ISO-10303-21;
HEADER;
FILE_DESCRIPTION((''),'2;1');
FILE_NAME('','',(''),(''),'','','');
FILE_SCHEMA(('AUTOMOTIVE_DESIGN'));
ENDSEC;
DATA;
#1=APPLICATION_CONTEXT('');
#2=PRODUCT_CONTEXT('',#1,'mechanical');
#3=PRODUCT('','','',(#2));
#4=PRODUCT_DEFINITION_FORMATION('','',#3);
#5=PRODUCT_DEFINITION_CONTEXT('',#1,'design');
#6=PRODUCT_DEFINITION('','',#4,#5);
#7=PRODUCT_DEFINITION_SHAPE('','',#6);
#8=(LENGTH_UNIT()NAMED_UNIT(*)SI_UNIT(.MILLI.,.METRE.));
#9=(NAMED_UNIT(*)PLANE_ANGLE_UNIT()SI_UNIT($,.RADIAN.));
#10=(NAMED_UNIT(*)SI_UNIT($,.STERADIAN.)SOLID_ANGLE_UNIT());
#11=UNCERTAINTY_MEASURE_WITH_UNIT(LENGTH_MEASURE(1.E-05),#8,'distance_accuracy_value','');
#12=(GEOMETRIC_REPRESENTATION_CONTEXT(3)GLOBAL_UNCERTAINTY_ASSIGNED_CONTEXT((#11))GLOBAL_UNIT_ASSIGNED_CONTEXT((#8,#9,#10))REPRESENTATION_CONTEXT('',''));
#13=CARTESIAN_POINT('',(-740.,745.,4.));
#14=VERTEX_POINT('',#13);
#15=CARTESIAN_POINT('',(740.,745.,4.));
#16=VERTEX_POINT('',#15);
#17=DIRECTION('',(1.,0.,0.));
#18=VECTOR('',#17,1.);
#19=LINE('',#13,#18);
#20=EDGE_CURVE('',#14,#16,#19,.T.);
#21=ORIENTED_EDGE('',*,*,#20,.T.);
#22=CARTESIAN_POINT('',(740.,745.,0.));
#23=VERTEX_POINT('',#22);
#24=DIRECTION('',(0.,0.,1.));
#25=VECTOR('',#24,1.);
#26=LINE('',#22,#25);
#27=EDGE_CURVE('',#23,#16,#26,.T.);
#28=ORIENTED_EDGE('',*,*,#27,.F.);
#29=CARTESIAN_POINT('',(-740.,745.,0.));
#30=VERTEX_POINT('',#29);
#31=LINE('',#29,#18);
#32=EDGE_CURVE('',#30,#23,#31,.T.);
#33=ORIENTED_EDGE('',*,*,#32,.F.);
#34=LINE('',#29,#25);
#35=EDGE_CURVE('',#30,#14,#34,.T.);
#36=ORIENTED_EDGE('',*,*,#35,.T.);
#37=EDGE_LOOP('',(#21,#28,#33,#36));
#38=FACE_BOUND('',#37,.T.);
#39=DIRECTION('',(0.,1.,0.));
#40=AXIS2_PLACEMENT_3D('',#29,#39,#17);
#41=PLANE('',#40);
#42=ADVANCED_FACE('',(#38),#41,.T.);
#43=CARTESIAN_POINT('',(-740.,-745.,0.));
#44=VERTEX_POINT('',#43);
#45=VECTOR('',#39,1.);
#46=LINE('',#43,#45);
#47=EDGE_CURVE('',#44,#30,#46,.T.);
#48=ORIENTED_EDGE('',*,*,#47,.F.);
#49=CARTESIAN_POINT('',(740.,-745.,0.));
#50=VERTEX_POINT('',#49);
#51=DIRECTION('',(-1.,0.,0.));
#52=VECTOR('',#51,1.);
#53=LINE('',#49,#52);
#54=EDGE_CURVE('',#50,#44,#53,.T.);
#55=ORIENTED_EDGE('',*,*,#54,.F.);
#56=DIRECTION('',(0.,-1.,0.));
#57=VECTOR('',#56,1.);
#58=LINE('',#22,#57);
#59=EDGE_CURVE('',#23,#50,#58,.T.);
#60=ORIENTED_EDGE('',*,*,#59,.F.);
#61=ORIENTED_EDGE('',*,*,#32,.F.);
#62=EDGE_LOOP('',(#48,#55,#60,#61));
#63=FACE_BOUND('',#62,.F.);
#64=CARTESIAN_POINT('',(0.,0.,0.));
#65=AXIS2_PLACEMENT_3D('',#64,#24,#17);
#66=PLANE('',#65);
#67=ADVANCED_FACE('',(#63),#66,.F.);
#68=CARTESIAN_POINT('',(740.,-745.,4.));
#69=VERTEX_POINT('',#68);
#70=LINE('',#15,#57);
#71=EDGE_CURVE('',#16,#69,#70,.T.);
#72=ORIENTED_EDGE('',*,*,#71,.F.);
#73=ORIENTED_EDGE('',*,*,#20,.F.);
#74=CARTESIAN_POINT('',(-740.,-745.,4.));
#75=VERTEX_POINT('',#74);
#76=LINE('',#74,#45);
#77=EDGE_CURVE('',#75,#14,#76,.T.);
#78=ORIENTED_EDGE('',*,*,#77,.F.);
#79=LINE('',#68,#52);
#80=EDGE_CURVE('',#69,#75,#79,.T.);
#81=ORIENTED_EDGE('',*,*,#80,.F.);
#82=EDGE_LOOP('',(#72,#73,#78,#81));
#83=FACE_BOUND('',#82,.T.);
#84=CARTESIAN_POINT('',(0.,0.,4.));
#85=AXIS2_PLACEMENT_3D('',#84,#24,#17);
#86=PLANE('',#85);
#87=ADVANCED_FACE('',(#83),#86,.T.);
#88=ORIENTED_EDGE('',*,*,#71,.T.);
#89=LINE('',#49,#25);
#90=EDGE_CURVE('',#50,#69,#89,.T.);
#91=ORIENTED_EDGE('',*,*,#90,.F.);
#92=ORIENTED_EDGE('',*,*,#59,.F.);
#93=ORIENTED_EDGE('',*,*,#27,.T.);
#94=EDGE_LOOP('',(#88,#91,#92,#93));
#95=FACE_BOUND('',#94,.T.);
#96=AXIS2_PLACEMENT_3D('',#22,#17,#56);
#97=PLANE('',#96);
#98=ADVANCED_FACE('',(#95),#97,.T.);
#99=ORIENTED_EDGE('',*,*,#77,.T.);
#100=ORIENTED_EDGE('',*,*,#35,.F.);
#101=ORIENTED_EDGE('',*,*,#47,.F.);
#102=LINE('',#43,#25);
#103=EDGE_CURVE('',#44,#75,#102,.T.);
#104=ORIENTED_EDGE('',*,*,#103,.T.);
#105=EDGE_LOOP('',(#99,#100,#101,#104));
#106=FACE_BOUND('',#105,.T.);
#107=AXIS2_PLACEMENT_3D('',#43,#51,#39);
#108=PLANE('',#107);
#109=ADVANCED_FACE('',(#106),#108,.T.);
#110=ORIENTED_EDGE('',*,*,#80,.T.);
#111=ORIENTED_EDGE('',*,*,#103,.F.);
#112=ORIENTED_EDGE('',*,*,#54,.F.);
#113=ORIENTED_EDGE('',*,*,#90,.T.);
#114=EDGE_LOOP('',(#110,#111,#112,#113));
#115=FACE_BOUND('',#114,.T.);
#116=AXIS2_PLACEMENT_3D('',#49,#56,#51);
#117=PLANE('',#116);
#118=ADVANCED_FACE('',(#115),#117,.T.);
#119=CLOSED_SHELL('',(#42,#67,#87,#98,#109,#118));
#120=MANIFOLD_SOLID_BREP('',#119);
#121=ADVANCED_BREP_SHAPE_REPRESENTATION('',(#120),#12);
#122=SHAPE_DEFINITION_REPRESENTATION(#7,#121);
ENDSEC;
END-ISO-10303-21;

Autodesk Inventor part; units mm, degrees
ref_plane "YZ Plane" through (0, 0, 0) normal (1, 0, 0) x (0, 1, 0)
ref_plane "XZ Plane" through (0, 0, 0) normal (0, 1, 0) x (-1, 0, 0)
ref_plane "XY Plane" through (0, 0, 0) normal (0, 0, 1) x (1, 0, 0)
sketch "Sketch1" plane through (0, 0, 0) normal (0, 0, 1) x (1, 0, 0)
  line L0 (740, -745) -> (-740, -745)
  line L1 (-740, -745) -> (-740, 745)
  line L2 (-740, 745) -> (740, 745)
  line L3 (740, 745) -> (740, -745)
  line L4 (740, -745) -> (-740, 745) construction
  line L5 (-740, -745) -> (740, 745) construction
  point P0 (0, 0)
  dimension "d0" = 1480
  dimension "d1" = 1490
extrude "Plate1" add sketch "Sketch1" along normal blind 4
sketch "Sketch3" plane through (0, 0, 0) normal (0, 0, -1) x (-1, 0, 0)
  line L0 (488.1353, -557.3462) -> (488.1353, -1055.4823) construction
  line L1 (488.1353, -1055.4823) -> (448.5081, -1055.4823) construction
  line L2 (448.5081, -1055.4823) -> (448.5081, -557.3462) construction
  line L3 (448.5081, -557.3462) -> (488.1353, -557.3462) construction
  line L4 (710, -489.5) -> (770, -489.5)
  line L5 (710, -489.5) -> (710, -485.5)
  line L6 (710, 7.1667) -> (770, 7.1667)
  line L7 (710, 7.1667) -> (710, 11.1667)
  line L8 (710, 503.8333) -> (770, 503.8333)
  line L9 (710, 503.8333) -> (710, 507.8333)
  line L10 (-738.6395, -489.5) -> (-680, -489.5)
  line L11 (-680, -489.5) -> (-680, -485.5)
  line L12 (-738.6395, 7.1667) -> (-680, 7.1667)
  line L13 (-680, 7.1667) -> (-680, 11.1667)
  line L14 (-738.6395, 503.8333) -> (-680, 503.8333)
  line L15 (-680, 503.8333) -> (-680, 507.8333)
  line L16 (-330.3944, -493) -> (-330.3944, -590)
  line L17 (-330.3944, -590) -> (-334.3934, -590)
  line L18 (169.7342, -493) -> (169.7342, -590)
  line L19 (169.7342, -590) -> (165.7352, -590)
  line L20 (669.8628, -493) -> (669.8628, -590)
  line L21 (669.8628, -590) -> (665.8638, -590)
  ellipse E0 centre (669.8628, 745) end of major axis (669.8628, 775) minor radius 0.6803 (669.8628, 715) -> (669.8628, 775) ccw
  line L22 (669.8628, 715) -> (665.8638, 715)
  ellipse E1 centre (169.7342, 745) end of major axis (169.7342, 775) minor radius 0.6803 (169.7342, 715) -> (169.7342, 775) ccw
  line L23 (169.7342, 715) -> (165.7352, 715)
  ellipse E2 centre (-330.3944, 745) end of major axis (-330.3944, 775) minor radius 0.6803 (-330.3944, 715) -> (-330.3944, 775) ccw
  line L24 (-330.3944, 715) -> (-334.3934, 715)
mark "Mark2"
equation "\"d0\" = Лист_ширина"
equation "\"d1\" = 0.5 * Лист_длина"
equation "\"d2\" = Thickness"
equation "\"BendRadius\" = Thickness"
equation "\"BendReliefWidth\" = Thickness"
equation "\"BendReliefDepth\" = 0.5 * Thickness"
equation "\"CornerReliefSize\" = 4 * Thickness"
equation "\"MinimumRemnant\" = 2 * Thickness"
equation "\"TransitionRadius\" = BendRadius"
equation "\"JacobiRadiusSize\" = BendRadius"
equation "\"GapSize\" = Thickness"
equation "\"Лист_ширина\" = 1480"
equation "\"Лист_длина\" = 2980"
equation "\"Thickness\" = 4"
properties part number "GBK 1115 shield 1" material "Steel"
